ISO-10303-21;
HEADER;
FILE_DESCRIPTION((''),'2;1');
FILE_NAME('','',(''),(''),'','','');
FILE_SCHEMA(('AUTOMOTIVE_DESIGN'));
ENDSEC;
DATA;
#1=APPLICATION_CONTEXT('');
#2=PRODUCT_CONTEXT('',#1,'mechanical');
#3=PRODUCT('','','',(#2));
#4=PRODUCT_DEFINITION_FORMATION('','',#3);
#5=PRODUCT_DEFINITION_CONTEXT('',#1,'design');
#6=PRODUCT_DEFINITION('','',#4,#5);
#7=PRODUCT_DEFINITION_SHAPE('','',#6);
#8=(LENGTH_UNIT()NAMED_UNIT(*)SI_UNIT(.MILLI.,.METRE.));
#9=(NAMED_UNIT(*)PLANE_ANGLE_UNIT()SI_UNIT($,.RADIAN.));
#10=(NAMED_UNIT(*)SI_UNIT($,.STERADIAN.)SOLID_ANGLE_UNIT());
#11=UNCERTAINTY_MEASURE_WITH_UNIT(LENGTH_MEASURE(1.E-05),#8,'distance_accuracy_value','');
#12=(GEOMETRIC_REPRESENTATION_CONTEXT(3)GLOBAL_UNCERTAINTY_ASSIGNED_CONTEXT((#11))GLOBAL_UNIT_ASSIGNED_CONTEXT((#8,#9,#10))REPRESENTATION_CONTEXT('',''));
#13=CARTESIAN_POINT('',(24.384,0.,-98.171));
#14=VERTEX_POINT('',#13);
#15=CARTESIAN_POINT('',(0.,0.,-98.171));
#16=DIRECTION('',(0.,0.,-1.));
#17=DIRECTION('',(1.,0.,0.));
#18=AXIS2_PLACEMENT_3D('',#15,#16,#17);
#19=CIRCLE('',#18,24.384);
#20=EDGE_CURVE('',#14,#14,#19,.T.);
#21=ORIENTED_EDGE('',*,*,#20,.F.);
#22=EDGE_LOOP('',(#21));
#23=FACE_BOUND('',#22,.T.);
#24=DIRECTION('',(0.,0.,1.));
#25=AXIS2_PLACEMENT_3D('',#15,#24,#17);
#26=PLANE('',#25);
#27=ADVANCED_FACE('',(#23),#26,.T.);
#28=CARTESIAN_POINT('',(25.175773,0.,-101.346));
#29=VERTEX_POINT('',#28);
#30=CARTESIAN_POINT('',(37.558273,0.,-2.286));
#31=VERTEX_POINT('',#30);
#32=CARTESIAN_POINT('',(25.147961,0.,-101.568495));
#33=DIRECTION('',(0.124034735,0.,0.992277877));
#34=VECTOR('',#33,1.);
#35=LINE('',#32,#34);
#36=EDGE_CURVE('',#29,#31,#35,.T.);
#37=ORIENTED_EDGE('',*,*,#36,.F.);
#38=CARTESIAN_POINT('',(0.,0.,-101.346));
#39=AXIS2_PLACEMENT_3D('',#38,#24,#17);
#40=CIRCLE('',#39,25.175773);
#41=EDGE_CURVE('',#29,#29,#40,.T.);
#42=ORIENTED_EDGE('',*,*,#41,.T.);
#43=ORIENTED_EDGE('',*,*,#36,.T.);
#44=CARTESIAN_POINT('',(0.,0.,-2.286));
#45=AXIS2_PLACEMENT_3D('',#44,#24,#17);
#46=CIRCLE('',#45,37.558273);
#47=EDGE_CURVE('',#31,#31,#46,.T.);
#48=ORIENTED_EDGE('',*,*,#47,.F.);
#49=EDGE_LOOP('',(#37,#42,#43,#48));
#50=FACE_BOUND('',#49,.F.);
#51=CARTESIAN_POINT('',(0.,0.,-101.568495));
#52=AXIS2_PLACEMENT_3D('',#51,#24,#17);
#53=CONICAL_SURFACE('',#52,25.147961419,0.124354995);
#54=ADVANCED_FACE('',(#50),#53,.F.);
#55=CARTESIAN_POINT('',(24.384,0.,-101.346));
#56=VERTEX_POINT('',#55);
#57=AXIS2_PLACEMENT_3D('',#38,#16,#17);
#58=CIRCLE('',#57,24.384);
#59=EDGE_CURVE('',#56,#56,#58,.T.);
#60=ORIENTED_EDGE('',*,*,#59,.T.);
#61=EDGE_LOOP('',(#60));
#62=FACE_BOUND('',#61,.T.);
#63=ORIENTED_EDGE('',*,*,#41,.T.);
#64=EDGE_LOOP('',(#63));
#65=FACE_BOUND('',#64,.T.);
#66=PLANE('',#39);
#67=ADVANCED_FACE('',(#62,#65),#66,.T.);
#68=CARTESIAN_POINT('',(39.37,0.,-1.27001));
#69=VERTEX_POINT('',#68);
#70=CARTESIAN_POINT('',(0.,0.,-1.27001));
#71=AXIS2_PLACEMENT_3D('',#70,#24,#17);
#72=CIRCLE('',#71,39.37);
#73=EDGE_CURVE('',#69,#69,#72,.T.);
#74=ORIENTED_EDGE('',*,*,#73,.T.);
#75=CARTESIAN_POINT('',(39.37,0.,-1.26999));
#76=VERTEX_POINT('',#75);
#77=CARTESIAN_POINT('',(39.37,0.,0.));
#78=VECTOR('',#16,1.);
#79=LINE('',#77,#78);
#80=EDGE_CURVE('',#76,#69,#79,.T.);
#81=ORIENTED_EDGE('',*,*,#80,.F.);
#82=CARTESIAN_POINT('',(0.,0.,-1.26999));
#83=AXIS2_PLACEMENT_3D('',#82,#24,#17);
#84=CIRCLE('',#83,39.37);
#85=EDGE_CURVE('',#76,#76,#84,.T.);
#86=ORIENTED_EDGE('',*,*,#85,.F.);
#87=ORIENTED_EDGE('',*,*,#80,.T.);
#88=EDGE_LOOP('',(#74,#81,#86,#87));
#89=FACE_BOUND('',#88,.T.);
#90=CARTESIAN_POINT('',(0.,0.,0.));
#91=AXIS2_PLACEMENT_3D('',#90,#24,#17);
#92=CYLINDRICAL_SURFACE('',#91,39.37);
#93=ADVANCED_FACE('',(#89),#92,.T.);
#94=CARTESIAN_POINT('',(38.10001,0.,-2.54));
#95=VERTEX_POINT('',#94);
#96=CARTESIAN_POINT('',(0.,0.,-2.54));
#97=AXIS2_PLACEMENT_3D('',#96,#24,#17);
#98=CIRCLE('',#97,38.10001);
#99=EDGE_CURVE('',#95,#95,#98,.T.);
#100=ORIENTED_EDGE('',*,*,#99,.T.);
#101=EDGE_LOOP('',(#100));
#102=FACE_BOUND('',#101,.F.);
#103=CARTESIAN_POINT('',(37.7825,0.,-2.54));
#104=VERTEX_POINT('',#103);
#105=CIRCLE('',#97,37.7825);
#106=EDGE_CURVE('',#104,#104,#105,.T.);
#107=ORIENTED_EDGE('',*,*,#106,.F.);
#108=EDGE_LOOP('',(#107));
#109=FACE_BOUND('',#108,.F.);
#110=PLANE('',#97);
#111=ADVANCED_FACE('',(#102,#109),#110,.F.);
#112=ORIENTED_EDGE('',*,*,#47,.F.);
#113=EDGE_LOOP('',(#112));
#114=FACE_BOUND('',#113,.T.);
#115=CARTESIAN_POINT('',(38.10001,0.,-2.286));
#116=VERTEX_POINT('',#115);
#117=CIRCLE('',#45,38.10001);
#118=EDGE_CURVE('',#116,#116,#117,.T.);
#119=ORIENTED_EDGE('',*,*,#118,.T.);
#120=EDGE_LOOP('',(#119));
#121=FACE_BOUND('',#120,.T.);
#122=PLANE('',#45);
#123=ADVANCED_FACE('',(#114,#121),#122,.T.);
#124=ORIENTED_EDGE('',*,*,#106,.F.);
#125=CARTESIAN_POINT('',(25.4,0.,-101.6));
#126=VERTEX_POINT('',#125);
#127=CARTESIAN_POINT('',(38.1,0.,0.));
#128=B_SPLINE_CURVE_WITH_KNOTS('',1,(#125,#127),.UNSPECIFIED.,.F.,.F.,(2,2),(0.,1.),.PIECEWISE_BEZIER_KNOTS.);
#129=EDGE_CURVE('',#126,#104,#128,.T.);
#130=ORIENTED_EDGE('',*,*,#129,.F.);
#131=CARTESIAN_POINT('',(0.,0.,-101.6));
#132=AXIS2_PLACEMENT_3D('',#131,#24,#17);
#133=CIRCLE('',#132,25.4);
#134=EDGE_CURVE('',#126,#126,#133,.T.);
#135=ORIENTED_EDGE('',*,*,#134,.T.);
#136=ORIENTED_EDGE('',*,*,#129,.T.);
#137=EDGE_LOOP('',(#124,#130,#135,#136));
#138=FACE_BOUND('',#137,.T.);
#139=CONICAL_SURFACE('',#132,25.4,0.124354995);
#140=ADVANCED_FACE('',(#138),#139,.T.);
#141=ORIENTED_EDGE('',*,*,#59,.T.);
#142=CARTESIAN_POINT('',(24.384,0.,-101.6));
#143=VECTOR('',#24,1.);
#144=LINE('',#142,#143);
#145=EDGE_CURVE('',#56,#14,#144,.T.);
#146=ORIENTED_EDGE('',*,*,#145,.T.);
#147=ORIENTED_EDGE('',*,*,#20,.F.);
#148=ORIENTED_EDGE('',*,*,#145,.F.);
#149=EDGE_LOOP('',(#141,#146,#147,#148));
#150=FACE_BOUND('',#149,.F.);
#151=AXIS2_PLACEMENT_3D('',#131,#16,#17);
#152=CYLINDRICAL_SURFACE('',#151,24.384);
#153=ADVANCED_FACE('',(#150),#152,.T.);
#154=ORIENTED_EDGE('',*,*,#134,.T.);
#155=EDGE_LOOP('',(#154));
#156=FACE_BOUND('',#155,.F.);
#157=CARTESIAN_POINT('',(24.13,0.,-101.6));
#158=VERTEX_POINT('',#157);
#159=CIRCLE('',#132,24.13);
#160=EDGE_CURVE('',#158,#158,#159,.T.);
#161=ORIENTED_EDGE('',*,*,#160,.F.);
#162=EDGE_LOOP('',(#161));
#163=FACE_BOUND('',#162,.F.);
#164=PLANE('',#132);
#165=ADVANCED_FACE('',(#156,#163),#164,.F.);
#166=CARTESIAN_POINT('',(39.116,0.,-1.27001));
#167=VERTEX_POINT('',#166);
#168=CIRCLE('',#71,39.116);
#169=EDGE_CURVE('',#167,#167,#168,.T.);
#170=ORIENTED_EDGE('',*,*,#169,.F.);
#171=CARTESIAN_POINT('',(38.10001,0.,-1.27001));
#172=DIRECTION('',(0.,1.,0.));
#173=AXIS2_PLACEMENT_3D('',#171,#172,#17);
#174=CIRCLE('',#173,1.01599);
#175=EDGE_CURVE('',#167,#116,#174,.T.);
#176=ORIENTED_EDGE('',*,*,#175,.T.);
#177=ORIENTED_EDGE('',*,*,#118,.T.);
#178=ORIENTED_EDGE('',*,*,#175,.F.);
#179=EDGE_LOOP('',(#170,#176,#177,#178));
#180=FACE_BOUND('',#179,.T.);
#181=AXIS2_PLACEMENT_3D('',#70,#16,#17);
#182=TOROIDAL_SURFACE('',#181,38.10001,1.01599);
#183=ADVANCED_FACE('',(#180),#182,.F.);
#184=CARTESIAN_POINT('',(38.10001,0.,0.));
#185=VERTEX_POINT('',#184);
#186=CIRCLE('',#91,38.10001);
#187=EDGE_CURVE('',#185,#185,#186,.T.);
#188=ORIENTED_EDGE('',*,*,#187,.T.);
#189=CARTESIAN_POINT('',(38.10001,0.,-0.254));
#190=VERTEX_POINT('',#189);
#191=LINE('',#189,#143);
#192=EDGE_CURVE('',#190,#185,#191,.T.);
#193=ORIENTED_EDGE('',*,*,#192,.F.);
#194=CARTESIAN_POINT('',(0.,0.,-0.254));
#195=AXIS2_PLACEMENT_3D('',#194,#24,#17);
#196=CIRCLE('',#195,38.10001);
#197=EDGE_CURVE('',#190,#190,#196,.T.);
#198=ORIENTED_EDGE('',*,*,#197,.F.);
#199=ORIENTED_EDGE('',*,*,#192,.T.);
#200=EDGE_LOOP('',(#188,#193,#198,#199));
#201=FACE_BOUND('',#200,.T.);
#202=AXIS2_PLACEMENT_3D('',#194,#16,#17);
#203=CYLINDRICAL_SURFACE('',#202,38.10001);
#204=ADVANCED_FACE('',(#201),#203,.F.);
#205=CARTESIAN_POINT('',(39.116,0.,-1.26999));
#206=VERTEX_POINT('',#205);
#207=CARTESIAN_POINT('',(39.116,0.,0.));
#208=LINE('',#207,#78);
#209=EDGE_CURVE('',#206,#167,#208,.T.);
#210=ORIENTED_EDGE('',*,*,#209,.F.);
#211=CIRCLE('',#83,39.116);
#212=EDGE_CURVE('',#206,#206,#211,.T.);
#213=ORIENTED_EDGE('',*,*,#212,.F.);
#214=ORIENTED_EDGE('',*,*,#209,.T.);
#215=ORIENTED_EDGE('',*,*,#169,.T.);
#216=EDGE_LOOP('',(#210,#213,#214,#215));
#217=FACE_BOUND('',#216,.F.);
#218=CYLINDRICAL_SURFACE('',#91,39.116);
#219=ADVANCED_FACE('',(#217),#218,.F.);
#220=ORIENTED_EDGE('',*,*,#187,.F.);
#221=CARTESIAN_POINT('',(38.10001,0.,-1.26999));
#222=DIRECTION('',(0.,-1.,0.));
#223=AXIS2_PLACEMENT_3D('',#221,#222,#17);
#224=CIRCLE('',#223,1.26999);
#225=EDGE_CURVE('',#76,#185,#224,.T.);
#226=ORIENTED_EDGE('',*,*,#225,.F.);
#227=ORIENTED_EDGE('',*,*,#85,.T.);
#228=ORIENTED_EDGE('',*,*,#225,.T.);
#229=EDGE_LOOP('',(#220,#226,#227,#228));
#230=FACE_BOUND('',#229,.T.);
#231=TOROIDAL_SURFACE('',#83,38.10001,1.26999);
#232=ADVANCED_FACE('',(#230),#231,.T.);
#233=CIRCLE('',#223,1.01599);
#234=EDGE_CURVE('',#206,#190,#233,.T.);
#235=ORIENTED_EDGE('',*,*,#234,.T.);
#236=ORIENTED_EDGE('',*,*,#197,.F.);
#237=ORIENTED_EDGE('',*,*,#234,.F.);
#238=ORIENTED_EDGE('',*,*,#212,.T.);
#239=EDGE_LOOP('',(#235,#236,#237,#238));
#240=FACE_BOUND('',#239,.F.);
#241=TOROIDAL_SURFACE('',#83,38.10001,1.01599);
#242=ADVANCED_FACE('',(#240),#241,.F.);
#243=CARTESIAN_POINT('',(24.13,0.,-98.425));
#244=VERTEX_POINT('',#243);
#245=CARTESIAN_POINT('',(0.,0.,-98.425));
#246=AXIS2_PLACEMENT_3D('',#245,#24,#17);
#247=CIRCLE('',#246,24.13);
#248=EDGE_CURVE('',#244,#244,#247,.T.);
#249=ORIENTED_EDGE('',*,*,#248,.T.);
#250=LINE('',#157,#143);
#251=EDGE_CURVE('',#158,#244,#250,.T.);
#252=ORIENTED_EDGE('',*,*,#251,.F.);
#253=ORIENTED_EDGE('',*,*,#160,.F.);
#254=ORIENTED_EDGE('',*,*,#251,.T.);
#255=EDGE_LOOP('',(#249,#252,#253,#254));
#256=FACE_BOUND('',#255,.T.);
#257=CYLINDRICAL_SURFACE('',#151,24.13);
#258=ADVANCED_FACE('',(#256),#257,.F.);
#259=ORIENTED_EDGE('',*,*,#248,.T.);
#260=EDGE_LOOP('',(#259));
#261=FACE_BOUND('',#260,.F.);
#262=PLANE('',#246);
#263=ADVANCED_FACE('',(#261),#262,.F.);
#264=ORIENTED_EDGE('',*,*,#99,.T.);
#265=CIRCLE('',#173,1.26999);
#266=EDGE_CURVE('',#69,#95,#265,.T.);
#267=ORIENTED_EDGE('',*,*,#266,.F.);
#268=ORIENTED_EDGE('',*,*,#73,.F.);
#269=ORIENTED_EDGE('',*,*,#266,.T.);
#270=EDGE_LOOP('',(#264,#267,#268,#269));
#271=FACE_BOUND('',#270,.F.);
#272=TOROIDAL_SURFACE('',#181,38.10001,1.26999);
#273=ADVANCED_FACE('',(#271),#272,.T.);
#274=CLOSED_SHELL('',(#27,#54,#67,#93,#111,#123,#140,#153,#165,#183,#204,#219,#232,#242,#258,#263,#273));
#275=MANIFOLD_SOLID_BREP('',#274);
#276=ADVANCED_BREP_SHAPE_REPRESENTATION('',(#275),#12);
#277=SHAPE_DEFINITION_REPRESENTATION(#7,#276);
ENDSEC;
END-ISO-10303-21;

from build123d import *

# Parameters (mm, degrees)
F2_R     = 25.4
F0_R     = 38.1
F3_R     = 24.13
F5_DEPTH = 3.175
F6_R     = 39.37
F7_DEPTH = 2.54
F8_R     = 1.26999
F9_T     = -0.254


# Not quite as in the source:
# - a fillet or chamfer is up to 0.001 mm smaller than in the source, because OpenCascade refuses the exact size
# - a shell that OpenCascade refuses in one call is made with other operations: the cavity is built on its own and cut out


with BuildPart() as f4:
    # F2 (on offset) → F4 section 0
    with BuildSketch(Plane.XY.offset(-101.6)):
        Circle(F2_R)
    # F0 (on Top) → F4 section 1
    with BuildSketch(Plane.XY):
        Circle(F0_R)
    loft()

    # F3 (on offset) → F5 (cut)
    with BuildSketch(Plane.XY.offset(-101.6)):
        Circle(F3_R)
    extrude(amount=F5_DEPTH, mode=Mode.SUBTRACT)

    # F6 (on Top) → F7 (join)
    with BuildSketch(Plane.XY):
        Circle(F6_R)
    extrude(amount=-F7_DEPTH)

    # F8 (radius 1.27 in the source; OpenCascade refuses exactly that, so slightly less here)
    f8_edges = [f4.edges().sort_by_distance(p)[0] for p in [
        (-39.37, 0, -2.54),
        (-39.37, 0, 0),
    ]]
    fillet(f8_edges, radius=F8_R)

    # F9: a shell. OpenCascade refuses it in one call, so the cavity is built on its own and cut out:
    # the body offset inwards by the wall thickness, plus a prism from it out through each open face.
    f9_core = offset(f4.part, amount=F9_T, kind=Kind.INTERSECTION, mode=Mode.PRIVATE)
    f9_exits = [f9_core.faces().sort_by_distance(p)[0] for p in [
        (0, 0, -0.254),
    ]]
    add(f9_core, mode=Mode.SUBTRACT)
    extrude(f9_exits, amount=-F9_T, mode=Mode.SUBTRACT)


solid = f4.part
